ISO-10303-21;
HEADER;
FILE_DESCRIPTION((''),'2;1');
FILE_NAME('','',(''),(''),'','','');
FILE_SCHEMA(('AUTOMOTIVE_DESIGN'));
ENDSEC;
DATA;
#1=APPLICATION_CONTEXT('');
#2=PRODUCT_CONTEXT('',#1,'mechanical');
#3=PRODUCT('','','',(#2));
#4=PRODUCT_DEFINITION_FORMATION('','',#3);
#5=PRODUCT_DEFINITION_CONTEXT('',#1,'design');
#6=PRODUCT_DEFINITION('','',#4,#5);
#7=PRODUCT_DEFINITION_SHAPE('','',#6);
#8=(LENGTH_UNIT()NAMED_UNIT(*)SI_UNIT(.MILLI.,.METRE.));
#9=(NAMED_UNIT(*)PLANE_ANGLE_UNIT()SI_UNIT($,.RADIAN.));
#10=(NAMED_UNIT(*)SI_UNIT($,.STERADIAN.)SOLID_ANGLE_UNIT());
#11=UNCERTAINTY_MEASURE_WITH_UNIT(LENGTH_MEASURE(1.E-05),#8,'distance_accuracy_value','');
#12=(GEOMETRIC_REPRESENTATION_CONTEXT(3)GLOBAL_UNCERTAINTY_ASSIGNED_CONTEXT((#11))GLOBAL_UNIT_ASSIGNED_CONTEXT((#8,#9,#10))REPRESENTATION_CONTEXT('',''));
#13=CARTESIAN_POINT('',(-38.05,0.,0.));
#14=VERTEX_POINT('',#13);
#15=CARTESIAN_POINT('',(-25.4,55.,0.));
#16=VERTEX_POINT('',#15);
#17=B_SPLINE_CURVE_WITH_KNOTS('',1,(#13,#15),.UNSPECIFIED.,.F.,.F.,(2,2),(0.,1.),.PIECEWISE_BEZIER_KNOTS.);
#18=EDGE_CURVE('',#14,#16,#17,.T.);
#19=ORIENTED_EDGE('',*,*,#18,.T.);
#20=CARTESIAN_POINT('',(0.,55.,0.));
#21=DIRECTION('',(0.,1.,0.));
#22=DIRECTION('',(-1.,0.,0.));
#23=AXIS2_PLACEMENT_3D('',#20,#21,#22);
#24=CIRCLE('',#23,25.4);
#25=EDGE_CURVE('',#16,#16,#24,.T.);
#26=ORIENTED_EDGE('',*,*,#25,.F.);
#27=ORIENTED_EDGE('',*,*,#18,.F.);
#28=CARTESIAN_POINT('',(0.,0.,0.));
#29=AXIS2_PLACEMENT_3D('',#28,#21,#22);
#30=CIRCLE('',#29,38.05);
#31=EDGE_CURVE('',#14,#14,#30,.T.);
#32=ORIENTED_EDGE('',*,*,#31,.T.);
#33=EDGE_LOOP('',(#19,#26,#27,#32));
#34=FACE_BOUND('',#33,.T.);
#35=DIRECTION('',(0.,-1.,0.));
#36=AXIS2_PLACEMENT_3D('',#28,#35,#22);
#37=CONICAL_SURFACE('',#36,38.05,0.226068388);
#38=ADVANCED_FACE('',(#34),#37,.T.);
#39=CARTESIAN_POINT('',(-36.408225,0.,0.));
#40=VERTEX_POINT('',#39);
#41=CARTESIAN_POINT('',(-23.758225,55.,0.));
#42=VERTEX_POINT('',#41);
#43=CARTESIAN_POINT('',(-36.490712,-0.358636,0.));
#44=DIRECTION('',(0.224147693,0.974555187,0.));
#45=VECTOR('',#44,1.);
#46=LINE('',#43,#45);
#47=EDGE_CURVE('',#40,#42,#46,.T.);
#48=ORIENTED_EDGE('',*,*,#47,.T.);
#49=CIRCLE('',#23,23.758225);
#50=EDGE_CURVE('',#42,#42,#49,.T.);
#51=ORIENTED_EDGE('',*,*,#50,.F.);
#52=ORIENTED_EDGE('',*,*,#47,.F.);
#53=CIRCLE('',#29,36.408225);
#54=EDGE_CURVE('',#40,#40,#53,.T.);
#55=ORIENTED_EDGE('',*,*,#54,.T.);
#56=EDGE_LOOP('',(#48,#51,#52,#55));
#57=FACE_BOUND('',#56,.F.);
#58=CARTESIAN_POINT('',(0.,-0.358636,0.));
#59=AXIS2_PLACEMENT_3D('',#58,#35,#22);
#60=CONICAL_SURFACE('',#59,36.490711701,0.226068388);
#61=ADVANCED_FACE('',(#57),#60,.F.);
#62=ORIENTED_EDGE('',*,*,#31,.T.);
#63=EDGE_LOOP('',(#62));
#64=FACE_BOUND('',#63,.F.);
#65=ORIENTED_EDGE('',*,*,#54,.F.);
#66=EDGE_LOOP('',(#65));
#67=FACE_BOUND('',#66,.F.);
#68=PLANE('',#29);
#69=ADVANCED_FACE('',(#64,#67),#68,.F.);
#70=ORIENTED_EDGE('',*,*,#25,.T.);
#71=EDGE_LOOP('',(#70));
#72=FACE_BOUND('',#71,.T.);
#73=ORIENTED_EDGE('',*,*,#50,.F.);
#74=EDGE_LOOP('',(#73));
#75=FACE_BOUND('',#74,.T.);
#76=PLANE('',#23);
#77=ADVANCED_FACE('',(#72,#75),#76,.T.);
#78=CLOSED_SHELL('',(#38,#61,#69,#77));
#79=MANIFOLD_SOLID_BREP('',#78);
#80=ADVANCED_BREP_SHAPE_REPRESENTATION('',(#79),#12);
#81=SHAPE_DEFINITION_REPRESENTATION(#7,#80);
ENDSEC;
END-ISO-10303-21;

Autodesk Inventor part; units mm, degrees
ref_plane "YZ Plane" through (0, 0, 0) normal (1, 0, 0) x (0, 1, 0)
ref_plane "XY Plane" through (0, 0, 0) normal (0, 0, 1) x (1, 0, 0)
sketch "Szkic6" plane through (0, 0, 0) normal (0, 1, 0) x (-1, 0, 0)
  circle A0 centre (0, 0) radius 38.05
  dimension "d33" = 76.1
ref_plane "Płaszczyzna konstrukcyjna1" through (0, 55, 0) normal (0, 1, 0) x (-1, 0, 0)
sketch "Szkic7" plane through (0, 55, 0) normal (0, 1, 0) x (-1, 0, 0)
  circle A0 centre (0, 0) radius 25.4
  dimension "d35" = 50.8
loft "Wyciągnięcie złożone1" add profiles "Szkic6", "Szkic7"
shell "Skorupa1" thickness 1.6 removed faces 2 at (7.2508, 55, -1.9085) at (-5.8996, 0, 7.9079)
equation "\"d33\" = OD1"
equation "\"d35\" = OD2"
equation "\"d52\" = THK"
equation "\"SzerokośćGięciaPodcięcia\" = Grubość"
equation "\"RozmiarPodcięciaNarożnika\" = 4 * Grubość"
equation "\"PromieńPrzejścia\" = PromieńGięcia"
equation "\"Rozmiar_promienia_Jacobiego\" = PromieńGięcia"
equation "\"Wielk_odstępu\" = Grubość"
equation "\"d2\" = PromieńGięcia"
equation "\"d23\" = PromieńGięcia"
equation "\"OD1\" = 76.1"
equation "\"OD2\" = 50.8"
equation "\"L\" = 55"
equation "\"THK\" = 1.6"
equation "\"d34\" = L"
equation "\"Grubość\" = 1.5"
equation "\"PromieńGięcia\" = 3"
properties part number "Redukcja symetryczna Ø76,1x50,8x1,6 L=55" material "304"
